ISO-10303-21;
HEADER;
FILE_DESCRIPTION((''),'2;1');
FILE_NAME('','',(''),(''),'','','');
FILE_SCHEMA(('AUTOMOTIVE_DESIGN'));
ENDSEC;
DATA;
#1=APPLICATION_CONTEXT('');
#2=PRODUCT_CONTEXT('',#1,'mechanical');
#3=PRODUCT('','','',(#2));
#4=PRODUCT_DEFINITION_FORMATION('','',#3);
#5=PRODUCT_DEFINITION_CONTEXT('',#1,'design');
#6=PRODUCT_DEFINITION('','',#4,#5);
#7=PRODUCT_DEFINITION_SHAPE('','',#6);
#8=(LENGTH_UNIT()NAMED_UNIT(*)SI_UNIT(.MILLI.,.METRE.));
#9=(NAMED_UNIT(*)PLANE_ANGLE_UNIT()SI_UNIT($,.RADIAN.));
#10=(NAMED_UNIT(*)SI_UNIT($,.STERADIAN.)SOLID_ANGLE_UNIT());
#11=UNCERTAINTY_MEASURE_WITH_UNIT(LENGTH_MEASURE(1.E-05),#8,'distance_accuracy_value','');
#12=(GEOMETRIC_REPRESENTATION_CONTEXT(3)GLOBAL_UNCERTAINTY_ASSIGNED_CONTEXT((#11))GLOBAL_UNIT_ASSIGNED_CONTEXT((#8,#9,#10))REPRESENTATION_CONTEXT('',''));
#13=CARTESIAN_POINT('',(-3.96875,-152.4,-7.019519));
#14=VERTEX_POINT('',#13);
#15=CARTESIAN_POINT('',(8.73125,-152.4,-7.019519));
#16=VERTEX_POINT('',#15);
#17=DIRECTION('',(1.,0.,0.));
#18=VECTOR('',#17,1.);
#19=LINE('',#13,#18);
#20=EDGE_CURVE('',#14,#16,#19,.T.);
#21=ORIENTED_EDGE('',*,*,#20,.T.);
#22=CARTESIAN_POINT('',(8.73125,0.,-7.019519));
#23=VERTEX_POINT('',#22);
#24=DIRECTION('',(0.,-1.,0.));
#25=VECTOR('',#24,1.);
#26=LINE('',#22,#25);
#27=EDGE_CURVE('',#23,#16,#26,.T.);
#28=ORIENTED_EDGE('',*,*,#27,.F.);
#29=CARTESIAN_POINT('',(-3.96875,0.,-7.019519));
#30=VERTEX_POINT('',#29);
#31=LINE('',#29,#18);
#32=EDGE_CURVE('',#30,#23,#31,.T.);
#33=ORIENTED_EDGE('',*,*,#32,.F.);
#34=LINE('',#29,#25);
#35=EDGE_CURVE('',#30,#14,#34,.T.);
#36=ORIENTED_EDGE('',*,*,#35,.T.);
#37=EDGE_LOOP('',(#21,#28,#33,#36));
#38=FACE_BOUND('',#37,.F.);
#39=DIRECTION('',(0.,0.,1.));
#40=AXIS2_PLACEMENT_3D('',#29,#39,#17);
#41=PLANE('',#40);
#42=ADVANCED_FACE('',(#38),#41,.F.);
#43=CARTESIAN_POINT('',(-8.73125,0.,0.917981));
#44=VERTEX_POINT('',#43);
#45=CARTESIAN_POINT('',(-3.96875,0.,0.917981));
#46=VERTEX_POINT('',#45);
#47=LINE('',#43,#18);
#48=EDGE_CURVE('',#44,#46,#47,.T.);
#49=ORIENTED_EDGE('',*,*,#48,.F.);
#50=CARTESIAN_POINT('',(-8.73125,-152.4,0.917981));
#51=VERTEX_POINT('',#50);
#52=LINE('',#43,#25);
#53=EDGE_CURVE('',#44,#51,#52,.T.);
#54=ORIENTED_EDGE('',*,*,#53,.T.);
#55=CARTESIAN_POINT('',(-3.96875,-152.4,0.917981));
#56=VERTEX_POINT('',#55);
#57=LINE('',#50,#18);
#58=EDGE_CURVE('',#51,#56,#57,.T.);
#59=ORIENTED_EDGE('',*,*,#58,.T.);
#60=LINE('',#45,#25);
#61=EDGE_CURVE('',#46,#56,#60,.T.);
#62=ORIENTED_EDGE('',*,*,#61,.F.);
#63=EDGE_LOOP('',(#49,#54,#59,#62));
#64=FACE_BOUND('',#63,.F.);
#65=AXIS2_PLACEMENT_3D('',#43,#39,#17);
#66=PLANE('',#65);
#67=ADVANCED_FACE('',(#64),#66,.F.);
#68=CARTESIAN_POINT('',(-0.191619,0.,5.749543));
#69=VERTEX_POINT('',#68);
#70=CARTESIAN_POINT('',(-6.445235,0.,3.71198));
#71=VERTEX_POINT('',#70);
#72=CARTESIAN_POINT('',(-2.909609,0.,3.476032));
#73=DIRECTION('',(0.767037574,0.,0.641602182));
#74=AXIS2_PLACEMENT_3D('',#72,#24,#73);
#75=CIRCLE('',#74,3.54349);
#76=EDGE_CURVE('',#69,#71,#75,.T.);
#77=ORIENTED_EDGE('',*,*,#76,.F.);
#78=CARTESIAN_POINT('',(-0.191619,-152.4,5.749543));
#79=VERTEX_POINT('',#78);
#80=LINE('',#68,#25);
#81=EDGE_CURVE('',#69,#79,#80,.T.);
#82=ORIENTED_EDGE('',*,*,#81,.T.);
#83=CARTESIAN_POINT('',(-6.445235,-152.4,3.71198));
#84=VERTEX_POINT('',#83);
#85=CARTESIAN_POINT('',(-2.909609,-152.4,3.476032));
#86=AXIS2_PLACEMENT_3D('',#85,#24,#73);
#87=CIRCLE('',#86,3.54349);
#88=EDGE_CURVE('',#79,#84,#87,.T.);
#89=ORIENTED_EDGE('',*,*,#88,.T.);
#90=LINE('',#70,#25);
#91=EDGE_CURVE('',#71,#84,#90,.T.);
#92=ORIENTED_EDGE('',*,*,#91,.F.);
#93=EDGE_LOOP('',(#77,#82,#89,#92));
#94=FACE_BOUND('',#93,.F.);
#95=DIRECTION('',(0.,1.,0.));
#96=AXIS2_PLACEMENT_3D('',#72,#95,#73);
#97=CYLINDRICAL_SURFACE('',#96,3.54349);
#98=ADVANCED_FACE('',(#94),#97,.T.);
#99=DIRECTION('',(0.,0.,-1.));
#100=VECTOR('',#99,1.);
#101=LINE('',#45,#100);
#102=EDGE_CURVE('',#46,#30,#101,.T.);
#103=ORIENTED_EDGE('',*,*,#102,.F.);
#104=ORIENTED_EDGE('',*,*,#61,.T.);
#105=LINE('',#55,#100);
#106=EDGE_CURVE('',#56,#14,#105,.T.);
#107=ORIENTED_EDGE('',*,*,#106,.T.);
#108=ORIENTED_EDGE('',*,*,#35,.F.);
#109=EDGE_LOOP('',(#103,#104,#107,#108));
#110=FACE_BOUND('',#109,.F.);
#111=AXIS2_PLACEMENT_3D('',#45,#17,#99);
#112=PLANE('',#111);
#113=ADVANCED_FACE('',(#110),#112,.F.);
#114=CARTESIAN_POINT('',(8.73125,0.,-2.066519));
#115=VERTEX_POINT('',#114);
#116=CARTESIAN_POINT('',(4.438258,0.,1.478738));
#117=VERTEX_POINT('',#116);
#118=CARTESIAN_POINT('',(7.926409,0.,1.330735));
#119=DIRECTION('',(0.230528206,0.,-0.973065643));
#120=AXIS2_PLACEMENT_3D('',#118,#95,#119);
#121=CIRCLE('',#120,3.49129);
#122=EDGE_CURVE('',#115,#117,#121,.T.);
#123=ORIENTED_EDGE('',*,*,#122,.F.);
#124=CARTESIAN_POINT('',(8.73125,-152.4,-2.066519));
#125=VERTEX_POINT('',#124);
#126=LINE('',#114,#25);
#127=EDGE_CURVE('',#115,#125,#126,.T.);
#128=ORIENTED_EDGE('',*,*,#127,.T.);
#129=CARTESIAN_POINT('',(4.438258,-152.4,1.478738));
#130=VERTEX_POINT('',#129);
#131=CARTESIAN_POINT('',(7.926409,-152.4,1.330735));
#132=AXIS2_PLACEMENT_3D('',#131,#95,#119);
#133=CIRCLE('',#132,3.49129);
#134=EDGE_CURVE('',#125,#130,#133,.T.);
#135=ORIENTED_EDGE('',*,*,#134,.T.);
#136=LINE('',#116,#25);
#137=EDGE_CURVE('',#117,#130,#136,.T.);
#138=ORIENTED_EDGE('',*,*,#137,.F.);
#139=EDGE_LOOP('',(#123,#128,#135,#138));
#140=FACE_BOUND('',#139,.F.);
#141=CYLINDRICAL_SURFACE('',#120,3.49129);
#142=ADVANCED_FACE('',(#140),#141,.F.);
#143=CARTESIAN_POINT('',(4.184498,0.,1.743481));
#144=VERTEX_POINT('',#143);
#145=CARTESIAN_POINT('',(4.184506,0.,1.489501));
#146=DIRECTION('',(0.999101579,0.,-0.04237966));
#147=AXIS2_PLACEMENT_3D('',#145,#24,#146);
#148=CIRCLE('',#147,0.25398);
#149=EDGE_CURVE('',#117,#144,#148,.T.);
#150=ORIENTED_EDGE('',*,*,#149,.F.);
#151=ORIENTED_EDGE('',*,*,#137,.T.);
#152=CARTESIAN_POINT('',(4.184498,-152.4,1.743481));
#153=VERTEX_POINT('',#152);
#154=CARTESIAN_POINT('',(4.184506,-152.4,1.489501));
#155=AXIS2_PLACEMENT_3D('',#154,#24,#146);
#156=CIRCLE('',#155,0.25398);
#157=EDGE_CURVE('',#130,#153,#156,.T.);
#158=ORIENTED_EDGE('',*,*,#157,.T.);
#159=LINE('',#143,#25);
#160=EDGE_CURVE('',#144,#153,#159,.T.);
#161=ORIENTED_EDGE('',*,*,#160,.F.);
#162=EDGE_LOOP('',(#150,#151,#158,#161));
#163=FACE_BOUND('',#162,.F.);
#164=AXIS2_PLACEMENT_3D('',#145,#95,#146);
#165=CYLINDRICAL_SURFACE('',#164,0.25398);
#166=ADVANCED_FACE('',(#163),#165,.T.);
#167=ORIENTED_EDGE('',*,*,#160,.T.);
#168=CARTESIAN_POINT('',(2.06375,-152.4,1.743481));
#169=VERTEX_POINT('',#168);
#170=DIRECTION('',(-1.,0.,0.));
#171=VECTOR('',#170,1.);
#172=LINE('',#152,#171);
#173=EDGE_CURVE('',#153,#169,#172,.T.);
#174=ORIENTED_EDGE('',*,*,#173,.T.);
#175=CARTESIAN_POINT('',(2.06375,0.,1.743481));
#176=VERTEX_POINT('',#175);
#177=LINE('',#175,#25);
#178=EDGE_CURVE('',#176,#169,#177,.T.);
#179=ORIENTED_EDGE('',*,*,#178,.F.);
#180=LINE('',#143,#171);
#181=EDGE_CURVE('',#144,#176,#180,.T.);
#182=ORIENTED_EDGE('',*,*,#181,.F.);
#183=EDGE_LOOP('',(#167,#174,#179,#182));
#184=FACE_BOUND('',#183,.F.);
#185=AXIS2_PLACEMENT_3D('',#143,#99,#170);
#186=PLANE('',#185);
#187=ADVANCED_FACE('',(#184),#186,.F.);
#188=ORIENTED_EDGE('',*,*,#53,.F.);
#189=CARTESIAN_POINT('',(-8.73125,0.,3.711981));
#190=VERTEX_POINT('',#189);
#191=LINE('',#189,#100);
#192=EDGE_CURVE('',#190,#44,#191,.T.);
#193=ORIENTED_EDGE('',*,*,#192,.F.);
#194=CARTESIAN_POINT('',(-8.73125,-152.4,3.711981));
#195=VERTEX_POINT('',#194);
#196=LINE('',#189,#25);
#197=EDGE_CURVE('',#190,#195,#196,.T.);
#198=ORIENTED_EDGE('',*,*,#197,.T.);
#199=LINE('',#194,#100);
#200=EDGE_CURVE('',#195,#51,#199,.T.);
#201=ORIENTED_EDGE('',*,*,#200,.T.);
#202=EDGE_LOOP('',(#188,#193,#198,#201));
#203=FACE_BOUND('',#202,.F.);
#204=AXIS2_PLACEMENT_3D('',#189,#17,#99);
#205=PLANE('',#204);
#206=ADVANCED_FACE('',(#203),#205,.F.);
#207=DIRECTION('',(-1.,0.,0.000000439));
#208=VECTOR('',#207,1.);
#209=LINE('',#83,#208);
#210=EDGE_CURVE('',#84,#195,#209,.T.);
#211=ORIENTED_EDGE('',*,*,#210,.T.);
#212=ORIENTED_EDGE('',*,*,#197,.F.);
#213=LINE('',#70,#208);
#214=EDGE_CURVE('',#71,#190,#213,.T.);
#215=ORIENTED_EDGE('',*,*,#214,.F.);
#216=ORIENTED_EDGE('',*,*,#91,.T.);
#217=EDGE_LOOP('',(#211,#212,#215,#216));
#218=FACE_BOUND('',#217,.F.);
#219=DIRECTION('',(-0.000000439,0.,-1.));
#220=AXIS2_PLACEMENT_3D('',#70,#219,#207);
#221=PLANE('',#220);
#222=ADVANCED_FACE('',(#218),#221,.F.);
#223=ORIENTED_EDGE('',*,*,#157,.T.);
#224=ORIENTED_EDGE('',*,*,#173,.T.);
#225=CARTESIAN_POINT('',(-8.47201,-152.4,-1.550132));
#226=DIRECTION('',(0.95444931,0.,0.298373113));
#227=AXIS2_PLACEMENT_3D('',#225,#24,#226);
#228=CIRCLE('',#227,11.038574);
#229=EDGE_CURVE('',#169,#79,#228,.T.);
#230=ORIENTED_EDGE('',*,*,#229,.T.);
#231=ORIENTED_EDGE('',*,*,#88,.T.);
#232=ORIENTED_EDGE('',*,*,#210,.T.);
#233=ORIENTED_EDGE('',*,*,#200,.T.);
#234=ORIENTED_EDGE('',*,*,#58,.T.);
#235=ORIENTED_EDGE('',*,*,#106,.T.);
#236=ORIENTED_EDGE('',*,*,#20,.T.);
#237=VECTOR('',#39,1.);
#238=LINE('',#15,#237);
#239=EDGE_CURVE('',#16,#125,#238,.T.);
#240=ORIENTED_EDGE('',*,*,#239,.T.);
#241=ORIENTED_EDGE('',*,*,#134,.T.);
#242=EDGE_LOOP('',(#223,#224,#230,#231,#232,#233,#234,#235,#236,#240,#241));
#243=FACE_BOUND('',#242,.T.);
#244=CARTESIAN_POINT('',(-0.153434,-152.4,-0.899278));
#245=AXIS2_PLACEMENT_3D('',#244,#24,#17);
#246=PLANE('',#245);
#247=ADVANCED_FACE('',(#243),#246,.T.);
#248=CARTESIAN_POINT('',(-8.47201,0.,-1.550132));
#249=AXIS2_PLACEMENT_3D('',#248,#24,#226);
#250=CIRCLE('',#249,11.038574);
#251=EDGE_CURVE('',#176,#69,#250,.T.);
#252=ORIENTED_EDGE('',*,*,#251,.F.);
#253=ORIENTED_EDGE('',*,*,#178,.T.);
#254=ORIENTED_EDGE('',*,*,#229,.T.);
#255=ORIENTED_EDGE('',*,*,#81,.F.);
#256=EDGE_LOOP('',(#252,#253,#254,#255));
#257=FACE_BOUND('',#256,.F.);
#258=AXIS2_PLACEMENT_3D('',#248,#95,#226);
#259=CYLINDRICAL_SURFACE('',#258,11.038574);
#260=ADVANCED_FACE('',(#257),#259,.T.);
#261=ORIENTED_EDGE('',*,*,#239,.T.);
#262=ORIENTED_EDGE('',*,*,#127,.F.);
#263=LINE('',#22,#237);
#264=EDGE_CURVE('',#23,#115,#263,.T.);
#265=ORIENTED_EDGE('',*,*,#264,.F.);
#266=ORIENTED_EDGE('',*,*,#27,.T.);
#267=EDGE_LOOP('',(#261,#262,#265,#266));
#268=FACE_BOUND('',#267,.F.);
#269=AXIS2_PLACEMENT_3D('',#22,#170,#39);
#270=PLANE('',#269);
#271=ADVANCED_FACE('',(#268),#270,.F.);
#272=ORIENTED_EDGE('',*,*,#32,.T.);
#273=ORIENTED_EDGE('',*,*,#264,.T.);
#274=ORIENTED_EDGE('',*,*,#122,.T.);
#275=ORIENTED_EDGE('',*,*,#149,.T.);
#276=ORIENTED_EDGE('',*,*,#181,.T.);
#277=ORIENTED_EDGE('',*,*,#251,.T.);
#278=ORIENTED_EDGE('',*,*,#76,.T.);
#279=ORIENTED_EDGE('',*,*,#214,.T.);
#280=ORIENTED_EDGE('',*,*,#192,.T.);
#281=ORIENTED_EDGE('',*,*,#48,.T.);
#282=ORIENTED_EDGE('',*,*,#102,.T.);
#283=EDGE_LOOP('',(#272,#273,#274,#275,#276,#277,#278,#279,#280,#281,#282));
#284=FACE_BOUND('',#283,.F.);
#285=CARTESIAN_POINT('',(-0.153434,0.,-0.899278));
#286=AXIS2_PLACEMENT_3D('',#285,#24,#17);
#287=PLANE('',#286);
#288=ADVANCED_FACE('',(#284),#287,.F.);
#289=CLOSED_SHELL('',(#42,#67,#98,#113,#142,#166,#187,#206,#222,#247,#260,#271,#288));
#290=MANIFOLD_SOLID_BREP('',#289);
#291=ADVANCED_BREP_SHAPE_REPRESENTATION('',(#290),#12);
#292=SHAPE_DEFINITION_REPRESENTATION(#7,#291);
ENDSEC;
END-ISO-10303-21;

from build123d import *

# Parameters (mm, degrees)
F1_DEPTH = 152.4


# Not quite as in the source:
# - ends of sketch curves that miss each other by under 0.0002 mm in the source are joined


with BuildPart() as f1:
    # F0 (on Front) → F1 (new body)
    with BuildSketch(Plane.XZ):
        with BuildLine():
            Line((-8.73125, 3.7119814), (-8.73125, 0.9179814))
            Line((-8.73125, 0.9179814), (-3.96875, 0.9179814))
            Line((-3.96875, 0.9179814), (-3.96875, -7.0195186))
            Line((-3.96875, -7.0195186), (8.73125, -7.0195186))
            Line((8.73125, -7.0195186), (8.73125, -2.0665186))
            ThreePointArc((8.73125, -2.0665186), (5.7032908876, -1.3612616552), (4.438258034, 1.4787376653))
            ThreePointArc((4.438258034, 1.4787376653), (4.3678620463, 1.6652468114), (4.1844976, 1.7434814))
            Line((4.1844976, 1.7434814), (2.06375, 1.7434814))
            ThreePointArc((2.06375, 1.7434814), (1.1469309524, 3.8652258573), (-0.1916191114, 5.7495426677))
            ThreePointArc((-0.1916191114, 5.7495426677), (-4.0073604602, 6.8451953761), (-6.4452349512, 3.7119803958))
            Line((-6.4452349512, 3.7119803958), (-8.73125, 3.7119814))
        make_face()
    extrude(amount=F1_DEPTH)


solid = f1.part
